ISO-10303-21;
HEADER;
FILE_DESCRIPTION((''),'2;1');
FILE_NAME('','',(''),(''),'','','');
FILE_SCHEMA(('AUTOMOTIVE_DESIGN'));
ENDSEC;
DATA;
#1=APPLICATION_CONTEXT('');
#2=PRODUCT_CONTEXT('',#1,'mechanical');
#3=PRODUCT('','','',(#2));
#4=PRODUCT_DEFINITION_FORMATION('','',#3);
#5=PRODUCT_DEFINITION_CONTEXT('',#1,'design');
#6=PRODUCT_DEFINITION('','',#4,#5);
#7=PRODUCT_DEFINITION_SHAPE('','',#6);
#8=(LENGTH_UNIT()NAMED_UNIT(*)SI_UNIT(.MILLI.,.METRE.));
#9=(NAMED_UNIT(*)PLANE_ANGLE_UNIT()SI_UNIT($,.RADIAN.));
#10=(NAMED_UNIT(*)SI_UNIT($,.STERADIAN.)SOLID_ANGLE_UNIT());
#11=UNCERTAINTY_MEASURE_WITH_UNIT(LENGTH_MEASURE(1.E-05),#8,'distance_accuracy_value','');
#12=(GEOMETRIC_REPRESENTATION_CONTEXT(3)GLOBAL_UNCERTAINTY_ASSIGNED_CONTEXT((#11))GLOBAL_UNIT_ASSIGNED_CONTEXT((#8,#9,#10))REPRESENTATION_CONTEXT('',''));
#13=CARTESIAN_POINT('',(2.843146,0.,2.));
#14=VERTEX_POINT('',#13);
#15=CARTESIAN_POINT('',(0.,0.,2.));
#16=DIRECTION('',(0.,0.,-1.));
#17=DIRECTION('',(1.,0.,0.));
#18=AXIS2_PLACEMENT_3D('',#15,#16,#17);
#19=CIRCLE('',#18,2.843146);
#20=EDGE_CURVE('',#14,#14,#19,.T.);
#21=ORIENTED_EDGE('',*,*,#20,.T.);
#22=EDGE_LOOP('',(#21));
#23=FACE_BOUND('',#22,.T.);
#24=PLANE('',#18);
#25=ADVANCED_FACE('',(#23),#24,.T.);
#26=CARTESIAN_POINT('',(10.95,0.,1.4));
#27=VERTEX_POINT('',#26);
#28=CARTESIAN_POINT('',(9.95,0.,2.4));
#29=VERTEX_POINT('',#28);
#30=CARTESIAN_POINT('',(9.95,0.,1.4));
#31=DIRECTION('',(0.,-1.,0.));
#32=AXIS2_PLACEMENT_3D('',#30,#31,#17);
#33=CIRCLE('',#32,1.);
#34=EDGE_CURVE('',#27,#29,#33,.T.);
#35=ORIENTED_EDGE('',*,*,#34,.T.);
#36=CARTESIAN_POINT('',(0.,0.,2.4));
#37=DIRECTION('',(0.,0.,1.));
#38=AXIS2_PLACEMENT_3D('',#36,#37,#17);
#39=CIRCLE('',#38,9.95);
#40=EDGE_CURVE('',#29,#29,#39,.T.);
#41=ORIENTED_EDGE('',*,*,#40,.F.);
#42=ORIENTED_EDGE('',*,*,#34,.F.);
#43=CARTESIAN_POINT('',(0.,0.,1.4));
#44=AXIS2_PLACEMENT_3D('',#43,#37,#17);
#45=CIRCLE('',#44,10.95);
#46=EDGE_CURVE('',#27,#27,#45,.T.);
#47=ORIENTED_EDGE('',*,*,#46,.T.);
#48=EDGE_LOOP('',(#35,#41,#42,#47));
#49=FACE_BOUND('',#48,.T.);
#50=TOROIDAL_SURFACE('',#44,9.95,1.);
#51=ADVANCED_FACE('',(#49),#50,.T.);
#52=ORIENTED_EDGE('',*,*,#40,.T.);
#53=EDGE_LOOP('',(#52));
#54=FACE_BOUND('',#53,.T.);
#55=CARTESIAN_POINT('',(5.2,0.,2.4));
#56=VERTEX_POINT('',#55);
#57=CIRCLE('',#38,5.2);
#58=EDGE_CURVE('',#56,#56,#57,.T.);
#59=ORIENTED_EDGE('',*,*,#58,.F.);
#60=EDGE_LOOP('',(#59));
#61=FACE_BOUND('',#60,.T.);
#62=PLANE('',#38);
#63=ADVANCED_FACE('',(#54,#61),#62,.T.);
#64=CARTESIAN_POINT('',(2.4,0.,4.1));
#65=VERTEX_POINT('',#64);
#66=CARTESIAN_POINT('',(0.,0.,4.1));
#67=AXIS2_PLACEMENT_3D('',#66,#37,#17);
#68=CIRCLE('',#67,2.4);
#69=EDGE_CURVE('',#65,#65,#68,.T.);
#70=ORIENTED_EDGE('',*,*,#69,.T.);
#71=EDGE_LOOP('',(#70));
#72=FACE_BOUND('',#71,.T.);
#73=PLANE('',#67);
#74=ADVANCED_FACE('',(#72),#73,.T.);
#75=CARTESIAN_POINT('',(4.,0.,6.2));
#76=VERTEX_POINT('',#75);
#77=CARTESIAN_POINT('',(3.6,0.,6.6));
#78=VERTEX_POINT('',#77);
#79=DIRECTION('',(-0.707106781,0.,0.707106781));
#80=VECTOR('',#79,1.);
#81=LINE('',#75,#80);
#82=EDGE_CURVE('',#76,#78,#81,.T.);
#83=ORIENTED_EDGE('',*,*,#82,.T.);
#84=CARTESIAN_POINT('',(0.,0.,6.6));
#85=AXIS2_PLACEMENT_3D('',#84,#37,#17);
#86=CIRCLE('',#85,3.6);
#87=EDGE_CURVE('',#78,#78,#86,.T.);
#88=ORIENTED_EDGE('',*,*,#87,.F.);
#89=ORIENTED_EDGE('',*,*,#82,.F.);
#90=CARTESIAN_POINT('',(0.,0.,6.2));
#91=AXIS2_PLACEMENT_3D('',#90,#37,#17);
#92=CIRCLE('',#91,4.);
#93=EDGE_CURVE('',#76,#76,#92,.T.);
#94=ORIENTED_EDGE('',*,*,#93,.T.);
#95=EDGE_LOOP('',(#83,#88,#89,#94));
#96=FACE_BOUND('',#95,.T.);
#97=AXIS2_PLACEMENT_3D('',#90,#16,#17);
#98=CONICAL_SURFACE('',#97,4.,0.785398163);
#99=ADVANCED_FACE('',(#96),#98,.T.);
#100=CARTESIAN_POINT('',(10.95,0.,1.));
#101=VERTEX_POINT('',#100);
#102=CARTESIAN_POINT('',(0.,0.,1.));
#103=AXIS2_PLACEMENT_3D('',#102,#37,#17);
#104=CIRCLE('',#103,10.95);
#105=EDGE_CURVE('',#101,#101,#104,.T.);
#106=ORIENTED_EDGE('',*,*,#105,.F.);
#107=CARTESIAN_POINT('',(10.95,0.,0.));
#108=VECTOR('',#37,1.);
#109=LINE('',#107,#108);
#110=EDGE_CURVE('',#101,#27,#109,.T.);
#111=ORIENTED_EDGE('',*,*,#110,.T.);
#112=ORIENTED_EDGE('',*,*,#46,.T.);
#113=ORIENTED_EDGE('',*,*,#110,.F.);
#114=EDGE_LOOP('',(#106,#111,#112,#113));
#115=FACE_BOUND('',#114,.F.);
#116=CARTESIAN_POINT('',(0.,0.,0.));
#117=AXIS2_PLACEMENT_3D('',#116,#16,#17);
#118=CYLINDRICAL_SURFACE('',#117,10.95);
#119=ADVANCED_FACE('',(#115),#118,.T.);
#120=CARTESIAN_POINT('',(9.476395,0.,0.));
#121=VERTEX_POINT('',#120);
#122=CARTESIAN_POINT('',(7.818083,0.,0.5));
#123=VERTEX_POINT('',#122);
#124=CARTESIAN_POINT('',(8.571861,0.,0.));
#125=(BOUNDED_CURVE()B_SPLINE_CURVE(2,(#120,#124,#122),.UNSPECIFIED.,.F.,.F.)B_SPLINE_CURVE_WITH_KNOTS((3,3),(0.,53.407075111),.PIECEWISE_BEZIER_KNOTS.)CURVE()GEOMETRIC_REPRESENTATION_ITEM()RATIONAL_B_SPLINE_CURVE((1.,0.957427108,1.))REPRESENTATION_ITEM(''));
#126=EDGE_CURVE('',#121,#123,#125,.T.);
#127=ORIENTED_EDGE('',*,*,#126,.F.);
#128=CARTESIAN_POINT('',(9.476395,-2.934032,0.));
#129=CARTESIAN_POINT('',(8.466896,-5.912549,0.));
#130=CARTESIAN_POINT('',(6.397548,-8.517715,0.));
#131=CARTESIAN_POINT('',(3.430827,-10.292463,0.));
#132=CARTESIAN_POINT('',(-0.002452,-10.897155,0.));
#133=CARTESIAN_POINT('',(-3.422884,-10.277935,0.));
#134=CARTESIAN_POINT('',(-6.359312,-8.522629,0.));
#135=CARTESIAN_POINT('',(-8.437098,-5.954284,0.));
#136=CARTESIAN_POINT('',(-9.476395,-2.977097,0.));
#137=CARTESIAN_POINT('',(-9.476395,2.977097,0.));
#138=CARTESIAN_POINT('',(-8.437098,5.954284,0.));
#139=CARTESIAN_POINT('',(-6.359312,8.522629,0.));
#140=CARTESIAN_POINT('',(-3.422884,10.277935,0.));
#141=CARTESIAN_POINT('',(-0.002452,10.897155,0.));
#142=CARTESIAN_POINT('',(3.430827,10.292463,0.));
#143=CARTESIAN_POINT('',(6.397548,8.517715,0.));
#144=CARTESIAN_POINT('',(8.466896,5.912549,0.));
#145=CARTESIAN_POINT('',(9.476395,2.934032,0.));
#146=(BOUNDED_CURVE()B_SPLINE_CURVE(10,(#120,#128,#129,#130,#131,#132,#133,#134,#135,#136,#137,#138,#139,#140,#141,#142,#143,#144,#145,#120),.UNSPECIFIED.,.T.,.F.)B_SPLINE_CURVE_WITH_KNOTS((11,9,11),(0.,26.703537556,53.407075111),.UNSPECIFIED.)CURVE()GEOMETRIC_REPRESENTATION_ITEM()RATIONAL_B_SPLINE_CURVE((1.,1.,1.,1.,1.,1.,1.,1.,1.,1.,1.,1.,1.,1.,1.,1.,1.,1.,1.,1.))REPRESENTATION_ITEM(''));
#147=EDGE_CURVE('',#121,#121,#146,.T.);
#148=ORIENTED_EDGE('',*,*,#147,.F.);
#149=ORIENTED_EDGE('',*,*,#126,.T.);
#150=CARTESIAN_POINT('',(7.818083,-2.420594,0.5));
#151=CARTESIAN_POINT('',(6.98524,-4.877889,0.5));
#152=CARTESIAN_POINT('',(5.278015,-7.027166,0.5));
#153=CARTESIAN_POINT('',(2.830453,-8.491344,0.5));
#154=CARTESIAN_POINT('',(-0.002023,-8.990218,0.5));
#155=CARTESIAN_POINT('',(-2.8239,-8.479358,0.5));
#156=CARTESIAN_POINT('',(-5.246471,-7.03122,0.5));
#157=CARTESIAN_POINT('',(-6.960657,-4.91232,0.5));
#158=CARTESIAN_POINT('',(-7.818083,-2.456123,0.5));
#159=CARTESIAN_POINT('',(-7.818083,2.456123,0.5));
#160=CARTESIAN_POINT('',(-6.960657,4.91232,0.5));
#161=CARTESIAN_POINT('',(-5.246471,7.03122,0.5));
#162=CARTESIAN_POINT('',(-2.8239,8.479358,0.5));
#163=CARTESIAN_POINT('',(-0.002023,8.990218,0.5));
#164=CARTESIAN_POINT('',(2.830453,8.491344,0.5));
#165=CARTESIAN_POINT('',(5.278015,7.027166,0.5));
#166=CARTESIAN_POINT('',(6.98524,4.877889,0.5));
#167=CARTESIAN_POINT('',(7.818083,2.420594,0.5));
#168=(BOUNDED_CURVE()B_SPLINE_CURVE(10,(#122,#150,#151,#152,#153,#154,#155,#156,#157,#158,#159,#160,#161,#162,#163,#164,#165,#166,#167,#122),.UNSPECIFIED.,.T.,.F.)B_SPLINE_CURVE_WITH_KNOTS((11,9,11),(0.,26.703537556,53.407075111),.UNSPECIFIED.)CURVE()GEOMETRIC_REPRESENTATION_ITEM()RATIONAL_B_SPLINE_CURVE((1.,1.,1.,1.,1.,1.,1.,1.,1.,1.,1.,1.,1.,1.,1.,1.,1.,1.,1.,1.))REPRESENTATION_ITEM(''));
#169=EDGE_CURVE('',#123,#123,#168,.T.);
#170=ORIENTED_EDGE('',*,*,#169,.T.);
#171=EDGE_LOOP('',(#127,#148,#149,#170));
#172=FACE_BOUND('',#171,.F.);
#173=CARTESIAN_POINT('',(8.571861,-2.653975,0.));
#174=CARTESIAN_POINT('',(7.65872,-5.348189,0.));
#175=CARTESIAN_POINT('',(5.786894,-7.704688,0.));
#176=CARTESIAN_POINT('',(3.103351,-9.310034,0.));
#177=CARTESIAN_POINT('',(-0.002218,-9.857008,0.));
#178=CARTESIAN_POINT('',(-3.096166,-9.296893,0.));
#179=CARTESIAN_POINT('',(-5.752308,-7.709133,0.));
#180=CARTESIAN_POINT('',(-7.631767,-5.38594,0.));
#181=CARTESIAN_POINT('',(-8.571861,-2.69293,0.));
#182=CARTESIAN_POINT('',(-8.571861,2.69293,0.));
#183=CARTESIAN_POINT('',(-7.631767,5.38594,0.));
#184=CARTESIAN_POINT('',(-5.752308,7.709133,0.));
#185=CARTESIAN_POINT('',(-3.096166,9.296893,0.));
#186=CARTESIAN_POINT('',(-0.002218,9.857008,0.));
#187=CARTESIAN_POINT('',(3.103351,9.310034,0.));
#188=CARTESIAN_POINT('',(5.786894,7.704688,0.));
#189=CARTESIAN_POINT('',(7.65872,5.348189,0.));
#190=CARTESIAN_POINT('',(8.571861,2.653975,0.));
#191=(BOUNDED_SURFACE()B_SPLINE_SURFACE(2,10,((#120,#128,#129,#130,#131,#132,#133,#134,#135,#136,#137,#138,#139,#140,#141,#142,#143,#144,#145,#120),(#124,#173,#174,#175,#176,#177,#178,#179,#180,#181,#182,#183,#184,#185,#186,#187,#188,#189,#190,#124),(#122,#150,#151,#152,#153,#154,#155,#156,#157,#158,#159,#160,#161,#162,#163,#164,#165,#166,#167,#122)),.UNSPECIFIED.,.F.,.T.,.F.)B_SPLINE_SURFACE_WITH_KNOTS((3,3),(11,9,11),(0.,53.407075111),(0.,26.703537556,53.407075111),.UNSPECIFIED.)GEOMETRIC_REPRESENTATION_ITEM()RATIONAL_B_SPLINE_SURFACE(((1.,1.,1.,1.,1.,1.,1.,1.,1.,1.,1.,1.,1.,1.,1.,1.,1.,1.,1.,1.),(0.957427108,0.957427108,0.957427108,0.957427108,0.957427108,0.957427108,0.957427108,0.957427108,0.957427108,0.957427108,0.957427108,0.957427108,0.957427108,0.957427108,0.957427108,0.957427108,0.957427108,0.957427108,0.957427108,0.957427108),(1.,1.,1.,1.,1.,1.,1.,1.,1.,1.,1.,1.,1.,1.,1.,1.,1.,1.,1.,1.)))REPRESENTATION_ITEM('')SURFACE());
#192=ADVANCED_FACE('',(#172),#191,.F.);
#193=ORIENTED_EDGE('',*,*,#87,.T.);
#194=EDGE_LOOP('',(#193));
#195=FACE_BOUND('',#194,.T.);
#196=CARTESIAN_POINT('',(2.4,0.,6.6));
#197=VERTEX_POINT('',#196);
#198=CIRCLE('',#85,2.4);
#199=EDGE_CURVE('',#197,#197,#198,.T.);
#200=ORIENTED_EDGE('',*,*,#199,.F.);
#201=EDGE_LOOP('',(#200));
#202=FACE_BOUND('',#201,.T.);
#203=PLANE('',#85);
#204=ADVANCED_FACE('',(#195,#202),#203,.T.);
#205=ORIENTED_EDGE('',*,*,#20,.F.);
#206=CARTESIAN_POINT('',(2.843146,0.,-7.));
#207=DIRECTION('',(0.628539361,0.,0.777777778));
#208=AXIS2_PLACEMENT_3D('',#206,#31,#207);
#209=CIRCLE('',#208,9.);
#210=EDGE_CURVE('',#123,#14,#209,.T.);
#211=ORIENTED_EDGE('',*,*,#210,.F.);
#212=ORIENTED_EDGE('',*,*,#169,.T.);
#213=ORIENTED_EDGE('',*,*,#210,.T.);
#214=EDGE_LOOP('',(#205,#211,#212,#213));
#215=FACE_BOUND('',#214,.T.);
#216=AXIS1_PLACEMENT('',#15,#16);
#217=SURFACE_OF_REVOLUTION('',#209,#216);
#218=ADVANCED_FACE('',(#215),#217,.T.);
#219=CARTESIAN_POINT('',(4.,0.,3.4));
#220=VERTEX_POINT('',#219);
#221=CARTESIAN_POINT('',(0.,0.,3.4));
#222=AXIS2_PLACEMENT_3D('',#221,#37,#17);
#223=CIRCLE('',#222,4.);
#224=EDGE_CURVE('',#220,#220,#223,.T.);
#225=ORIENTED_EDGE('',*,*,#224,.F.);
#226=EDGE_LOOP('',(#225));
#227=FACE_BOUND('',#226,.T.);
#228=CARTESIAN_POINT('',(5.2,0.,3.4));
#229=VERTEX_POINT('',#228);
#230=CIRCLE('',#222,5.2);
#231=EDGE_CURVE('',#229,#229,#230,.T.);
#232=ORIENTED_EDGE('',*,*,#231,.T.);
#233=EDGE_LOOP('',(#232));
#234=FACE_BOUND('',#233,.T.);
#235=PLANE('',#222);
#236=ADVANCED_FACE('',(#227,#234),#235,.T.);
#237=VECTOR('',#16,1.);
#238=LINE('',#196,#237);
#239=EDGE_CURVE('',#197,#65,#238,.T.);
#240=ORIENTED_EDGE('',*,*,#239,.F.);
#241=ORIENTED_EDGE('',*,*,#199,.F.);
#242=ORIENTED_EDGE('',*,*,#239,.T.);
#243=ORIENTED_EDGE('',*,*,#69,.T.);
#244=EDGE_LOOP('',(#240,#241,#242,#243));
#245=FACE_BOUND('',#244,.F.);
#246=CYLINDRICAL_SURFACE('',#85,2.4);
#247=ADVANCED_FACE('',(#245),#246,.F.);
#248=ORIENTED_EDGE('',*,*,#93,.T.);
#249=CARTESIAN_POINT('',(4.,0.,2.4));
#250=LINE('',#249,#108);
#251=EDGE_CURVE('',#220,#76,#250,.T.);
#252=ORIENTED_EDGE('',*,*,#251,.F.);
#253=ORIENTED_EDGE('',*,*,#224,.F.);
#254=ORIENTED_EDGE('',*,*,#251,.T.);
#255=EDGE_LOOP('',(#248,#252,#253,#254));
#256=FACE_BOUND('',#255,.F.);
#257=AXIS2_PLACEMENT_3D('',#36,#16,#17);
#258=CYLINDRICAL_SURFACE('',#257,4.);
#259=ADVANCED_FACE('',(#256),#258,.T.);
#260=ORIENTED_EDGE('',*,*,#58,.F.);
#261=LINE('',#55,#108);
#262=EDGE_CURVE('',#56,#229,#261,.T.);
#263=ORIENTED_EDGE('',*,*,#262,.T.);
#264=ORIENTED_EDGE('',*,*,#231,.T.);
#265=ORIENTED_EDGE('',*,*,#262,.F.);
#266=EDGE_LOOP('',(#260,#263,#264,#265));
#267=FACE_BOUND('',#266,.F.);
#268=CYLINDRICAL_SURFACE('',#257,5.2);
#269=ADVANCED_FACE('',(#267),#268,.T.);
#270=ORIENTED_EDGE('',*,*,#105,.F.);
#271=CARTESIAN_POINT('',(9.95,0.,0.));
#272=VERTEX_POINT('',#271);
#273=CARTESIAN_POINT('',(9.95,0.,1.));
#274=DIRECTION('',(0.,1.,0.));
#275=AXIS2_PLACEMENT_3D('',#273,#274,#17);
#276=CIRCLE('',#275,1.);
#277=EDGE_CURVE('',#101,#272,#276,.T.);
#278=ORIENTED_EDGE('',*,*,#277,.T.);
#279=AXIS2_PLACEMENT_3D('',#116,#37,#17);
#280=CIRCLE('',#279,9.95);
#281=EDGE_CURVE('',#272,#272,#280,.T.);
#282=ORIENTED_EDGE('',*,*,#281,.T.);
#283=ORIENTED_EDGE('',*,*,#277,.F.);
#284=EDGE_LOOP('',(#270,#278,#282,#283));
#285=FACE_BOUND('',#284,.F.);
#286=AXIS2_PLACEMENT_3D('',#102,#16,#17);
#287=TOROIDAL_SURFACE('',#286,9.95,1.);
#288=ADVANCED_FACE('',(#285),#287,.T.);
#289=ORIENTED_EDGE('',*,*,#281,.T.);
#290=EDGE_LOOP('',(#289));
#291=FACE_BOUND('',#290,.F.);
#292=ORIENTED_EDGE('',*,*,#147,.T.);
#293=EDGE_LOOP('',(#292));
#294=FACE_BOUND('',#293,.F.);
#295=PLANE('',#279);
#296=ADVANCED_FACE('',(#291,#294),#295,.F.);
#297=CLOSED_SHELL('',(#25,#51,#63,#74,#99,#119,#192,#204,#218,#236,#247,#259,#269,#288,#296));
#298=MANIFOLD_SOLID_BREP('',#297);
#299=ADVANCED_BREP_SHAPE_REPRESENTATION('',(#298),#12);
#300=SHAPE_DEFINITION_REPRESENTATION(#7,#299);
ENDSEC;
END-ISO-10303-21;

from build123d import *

# Parameters (mm, degrees)
F0_R      = 10.95
F1_DEPTH  = 2.4
F2_R      = 4
F3_DEPTH  = 4.2
F4_R      = 1
F5_R      = 5.2
F5_R_2    = 4
F6_DEPTH  = 1
F7_R      = 1
F8_R      = 8.5
F9_DEPTH  = 2
F11_SIZE  = 0.4
F12_R     = 3
F13_R     = 2.4
F14_DEPTH = 2.5


# Not quite as in the source:
# - a fillet or chamfer that OpenCascade refuses, or shapes differently, is made with other operations: its cross-section is extruded or revolved along the edge and cut away or added


with BuildPart() as f1:
    # F0 (on Top) → F1 (new body)
    with BuildSketch(Plane.XY):
        Circle(F0_R)
    extrude(amount=F1_DEPTH)

    # F2 (on face) → F3 (join)
    with BuildSketch(Plane.XY.offset(2.4)):
        Circle(F2_R)
    extrude(amount=F3_DEPTH)

    # F4
    f4_edges = [f1.edges().sort_by_distance(p)[0] for p in [
        (-10.95, 0, 2.4),
    ]]
    fillet(f4_edges, radius=F4_R)

    # F5 (on face) → F6 (join)
    with BuildSketch(Plane.XY.offset(2.4)):
        Circle(F5_R)
        Circle(F5_R_2, mode=Mode.SUBTRACT)
    extrude(amount=F6_DEPTH)

    # F7
    f7_edges = [f1.edges().sort_by_distance(p)[0] for p in [
        (-10.95, 0, 0),
    ]]
    fillet(f7_edges, radius=F7_R)

    # F8 (on face) → F9 (cut)
    with BuildSketch(Plane(origin=(0, 0, 0), x_dir=(1, 0, 0), z_dir=(0, 0, -1))):
        Circle(F8_R)
    extrude(amount=-F9_DEPTH, mode=Mode.SUBTRACT)

    # F10: fillet of radius 9 on 1 edges, made by hand

    # F10_s1 → F10_t2 (revolve)
    with BuildSketch(Plane.XZ):
        with BuildLine():
            ThreePointArc((8.5, 0), (5.8431457505, 1.4852813742), (2.8431457505, 2))
            Line((2.8431457505, 2), (8.5, 2))
            Line((8.5, 2), (8.5, 0))
        make_face()
    revolve(axis=Axis((0, 0, 2), (0, 0, -1)))

    # F11
    f11_edges = [f1.edges().sort_by_distance(p)[0] for p in [
        (-4, 0, 6.6),
    ]]
    chamfer(f11_edges, length=F11_SIZE)

    # F12
    f12_edges = [f1.edges().sort_by_distance(p)[0] for p in [
        (-8.5, 0, 0),
    ]]
    fillet(f12_edges, radius=F12_R)

    # F13 (on face) → F14 (cut)
    with BuildSketch(Plane.XY.offset(6.6)):
        Circle(F13_R)
    extrude(amount=-F14_DEPTH, mode=Mode.SUBTRACT)


solid = f1.part
